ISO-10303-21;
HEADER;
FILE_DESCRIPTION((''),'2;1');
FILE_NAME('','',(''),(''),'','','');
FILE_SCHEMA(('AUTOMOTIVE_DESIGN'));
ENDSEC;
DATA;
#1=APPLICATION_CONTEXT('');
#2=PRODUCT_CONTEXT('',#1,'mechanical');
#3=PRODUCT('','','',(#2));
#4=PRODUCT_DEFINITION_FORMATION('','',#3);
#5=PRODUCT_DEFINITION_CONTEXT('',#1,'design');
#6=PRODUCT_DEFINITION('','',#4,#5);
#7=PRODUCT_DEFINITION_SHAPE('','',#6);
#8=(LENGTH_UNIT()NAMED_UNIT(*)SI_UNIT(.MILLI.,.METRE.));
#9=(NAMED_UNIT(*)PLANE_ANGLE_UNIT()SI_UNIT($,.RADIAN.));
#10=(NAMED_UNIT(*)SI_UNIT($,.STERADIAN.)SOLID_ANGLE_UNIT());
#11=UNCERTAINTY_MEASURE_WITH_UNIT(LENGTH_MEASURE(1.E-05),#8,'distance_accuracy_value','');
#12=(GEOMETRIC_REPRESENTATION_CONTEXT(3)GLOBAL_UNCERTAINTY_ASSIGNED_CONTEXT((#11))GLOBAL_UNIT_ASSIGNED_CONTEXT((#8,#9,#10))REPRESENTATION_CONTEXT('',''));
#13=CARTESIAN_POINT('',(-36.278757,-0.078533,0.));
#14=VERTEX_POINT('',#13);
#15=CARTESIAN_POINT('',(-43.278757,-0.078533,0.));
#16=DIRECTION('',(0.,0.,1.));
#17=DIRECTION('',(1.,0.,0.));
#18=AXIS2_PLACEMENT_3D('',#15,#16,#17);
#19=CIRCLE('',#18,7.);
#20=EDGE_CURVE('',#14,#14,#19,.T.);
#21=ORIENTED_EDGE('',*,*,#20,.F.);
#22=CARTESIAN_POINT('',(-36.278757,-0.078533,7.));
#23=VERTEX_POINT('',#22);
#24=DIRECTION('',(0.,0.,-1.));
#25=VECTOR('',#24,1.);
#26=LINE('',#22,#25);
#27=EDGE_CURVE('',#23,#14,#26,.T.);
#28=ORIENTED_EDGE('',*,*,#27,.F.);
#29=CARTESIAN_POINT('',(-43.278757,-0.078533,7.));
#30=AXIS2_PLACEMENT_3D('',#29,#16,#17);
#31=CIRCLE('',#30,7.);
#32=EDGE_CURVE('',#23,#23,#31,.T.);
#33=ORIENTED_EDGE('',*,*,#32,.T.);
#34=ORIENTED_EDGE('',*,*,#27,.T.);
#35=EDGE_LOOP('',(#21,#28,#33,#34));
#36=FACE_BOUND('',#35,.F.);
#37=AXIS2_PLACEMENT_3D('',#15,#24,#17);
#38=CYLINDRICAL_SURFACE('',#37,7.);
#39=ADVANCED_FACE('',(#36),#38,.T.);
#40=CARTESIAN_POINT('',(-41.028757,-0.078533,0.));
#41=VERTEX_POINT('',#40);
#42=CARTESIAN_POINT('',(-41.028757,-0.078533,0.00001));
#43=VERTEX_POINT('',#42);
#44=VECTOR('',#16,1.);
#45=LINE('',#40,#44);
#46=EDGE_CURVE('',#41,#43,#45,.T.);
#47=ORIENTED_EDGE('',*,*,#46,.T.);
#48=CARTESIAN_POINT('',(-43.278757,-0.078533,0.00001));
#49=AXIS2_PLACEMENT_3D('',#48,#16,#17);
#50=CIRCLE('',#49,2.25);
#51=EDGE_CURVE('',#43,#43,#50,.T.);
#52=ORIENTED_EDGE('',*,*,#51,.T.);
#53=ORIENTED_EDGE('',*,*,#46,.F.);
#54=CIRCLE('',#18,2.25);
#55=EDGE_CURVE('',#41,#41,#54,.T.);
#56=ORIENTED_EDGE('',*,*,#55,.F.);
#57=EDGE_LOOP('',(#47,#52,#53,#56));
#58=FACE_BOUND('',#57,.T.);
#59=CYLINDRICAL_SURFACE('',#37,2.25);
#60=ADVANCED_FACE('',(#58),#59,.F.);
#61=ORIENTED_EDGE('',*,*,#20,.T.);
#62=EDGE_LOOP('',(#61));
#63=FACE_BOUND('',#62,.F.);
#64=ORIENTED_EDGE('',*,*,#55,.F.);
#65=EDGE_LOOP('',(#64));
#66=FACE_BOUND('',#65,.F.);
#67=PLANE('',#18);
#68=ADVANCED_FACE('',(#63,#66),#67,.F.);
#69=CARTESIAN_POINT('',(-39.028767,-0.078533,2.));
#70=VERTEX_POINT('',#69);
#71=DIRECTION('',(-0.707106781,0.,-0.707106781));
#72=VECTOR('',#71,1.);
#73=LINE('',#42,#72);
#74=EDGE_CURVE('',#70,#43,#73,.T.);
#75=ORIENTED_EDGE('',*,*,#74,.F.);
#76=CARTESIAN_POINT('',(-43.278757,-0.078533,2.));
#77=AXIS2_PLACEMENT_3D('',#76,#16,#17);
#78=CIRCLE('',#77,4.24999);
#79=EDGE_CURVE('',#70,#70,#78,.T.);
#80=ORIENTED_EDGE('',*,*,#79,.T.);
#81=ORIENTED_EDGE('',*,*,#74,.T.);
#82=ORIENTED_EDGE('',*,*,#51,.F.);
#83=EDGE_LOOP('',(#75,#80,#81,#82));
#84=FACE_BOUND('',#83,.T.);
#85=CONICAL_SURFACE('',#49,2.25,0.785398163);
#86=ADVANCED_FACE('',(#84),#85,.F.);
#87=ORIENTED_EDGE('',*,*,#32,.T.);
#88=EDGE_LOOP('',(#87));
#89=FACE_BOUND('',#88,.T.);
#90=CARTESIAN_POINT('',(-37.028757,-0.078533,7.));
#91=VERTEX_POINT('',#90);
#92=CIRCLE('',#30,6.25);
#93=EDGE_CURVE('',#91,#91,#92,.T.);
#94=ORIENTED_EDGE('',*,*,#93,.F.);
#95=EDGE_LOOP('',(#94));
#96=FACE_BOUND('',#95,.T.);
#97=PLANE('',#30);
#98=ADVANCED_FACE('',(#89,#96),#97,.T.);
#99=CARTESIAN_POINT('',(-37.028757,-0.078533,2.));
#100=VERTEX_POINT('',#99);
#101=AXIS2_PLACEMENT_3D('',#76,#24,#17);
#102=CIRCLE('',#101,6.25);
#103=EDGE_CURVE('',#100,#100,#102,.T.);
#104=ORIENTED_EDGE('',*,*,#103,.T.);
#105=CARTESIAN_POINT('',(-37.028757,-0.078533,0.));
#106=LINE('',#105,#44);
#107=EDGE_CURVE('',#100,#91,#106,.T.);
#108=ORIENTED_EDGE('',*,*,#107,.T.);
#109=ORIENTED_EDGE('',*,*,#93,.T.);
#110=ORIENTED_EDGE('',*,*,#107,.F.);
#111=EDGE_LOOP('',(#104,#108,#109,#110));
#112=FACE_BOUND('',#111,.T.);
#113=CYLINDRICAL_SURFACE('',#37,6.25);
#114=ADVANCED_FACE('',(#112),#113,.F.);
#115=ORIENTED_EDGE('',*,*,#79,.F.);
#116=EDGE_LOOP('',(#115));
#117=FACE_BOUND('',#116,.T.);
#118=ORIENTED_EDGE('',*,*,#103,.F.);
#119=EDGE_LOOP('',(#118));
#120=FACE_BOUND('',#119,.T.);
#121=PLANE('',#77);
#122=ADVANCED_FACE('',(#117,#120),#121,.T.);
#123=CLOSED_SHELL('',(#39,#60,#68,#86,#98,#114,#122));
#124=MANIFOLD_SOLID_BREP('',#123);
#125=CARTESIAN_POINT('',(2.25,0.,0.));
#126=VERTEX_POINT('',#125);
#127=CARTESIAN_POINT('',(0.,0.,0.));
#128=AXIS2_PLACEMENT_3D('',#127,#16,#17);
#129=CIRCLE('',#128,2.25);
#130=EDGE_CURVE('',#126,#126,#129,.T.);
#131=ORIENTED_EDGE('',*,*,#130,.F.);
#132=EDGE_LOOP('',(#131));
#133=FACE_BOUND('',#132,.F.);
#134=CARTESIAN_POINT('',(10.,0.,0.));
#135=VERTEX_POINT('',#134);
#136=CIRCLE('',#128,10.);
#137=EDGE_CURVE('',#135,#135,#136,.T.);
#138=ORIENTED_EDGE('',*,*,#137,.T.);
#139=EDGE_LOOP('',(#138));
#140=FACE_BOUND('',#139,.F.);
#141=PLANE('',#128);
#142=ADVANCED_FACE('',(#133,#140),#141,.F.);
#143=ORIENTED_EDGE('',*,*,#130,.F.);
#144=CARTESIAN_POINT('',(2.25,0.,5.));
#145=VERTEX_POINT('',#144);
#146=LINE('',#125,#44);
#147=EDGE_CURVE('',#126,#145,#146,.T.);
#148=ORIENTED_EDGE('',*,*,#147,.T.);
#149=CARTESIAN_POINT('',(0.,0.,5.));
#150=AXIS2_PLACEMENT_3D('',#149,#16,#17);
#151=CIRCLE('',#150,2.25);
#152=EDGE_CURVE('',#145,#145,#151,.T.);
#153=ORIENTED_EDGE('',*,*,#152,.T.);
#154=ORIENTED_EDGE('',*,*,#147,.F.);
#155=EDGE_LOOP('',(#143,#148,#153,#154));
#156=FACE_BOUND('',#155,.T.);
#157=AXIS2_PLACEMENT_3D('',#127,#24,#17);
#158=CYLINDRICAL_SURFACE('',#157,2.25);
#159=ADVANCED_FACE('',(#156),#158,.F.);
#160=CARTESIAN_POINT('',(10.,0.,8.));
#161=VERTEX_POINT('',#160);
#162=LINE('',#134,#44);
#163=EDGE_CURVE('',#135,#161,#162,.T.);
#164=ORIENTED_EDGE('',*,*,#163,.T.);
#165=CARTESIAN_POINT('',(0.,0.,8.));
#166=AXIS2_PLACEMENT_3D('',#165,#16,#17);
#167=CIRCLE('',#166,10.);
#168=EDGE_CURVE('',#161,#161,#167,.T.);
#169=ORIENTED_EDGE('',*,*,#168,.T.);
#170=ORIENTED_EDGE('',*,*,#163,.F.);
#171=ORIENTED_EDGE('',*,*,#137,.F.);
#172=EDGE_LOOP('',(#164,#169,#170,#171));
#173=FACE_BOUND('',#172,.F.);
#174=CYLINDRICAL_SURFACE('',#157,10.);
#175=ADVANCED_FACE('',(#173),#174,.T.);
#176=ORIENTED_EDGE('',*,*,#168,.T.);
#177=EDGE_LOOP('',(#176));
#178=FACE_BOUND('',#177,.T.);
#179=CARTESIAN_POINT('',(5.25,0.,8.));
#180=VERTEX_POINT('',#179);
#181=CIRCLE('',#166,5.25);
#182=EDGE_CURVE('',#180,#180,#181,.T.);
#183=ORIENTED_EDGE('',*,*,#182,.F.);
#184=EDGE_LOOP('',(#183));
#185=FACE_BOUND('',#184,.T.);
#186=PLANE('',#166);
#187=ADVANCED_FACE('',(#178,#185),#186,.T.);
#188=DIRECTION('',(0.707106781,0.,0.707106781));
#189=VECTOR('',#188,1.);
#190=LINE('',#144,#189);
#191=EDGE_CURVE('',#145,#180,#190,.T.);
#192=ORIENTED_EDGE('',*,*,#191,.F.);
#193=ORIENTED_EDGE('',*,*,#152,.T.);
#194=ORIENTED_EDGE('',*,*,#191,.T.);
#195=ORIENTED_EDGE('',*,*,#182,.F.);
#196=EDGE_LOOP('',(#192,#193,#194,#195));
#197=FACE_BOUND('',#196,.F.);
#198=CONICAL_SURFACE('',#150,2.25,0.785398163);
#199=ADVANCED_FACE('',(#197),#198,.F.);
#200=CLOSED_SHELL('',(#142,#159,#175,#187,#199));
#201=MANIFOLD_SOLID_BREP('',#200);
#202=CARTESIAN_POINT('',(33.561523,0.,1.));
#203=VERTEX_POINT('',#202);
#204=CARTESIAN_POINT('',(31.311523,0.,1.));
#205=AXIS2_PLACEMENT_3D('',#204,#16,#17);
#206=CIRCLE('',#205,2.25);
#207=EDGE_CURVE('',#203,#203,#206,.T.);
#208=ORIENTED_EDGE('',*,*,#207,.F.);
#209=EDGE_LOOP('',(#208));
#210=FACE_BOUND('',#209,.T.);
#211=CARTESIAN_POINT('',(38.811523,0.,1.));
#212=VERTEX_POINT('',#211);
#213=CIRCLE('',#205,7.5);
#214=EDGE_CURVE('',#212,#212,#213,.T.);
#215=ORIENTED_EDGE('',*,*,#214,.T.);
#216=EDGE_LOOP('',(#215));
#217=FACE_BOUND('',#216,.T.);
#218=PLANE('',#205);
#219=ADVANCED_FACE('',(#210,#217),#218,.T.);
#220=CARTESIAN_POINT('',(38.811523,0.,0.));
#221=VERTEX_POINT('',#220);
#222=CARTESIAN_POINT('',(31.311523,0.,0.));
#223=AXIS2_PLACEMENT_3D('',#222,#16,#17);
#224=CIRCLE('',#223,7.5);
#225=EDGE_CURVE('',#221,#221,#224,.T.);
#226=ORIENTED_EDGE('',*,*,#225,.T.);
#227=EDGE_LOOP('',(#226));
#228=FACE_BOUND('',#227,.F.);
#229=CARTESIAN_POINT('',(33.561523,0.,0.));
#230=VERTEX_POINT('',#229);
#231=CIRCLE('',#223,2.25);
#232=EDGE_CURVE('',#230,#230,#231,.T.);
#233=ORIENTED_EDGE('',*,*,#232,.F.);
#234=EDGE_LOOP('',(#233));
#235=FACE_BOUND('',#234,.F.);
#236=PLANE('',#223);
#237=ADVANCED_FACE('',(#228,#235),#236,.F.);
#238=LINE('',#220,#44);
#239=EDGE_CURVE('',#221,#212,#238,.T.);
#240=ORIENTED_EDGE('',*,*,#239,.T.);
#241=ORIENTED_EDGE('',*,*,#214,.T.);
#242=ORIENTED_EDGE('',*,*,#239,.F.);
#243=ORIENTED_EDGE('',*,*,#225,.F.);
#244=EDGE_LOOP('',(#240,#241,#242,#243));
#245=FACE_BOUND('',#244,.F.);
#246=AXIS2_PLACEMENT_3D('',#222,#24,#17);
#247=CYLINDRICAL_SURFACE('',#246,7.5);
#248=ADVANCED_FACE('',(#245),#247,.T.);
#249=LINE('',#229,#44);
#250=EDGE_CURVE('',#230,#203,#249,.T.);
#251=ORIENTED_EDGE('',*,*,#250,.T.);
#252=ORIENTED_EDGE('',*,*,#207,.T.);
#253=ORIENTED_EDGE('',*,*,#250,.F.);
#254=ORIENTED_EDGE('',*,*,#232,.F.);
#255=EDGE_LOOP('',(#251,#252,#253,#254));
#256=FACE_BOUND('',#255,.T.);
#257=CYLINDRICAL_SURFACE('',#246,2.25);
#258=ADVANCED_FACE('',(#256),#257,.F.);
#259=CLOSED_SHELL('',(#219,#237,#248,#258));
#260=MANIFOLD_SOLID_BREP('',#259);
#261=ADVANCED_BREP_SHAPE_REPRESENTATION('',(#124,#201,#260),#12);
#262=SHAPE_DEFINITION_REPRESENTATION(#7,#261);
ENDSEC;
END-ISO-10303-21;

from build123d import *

# Parameters (mm, degrees)
F0_R     = 10
F0_R_2   = 2.25
F1_DEPTH = 8
F2_SIZE  = 3
F0_R_3   = 7.5
F3_DEPTH = 1
F0_R_4   = 7
F0_R_5   = 6.25
F4_DEPTH = 2
F5_DEPTH = 7
F6_SIZE  = 1.99999


# Not quite as in the source:
# - a fillet or chamfer is up to 0.001 mm smaller than in the source, because OpenCascade refuses the exact size


with BuildPart() as f1:
    # F0 (on Top) → F1 (new body)
    with BuildSketch(Plane.XY):
        Circle(F0_R)
        Circle(F0_R_2, mode=Mode.SUBTRACT)
    extrude(amount=F1_DEPTH)

    # F2
    f2_edges = [f1.edges().sort_by_distance(p)[0] for p in [
        (-2.25, 0, 8),
    ]]
    chamfer(f2_edges, length=F2_SIZE)


with BuildPart() as f3:
    # F0 (on Top) → F3 (new body)
    with BuildSketch(Plane.XY):
        with Locations((31.3115231693, 0)):
            Circle(F0_R_3)
        with Locations((31.3115231693, 0)):
            Circle(F0_R_2, mode=Mode.SUBTRACT)
    extrude(amount=F3_DEPTH)


with BuildPart() as f4:
    # F0 (on Top) → F4 (new body)
    with BuildSketch(Plane.XY):
        with Locations((-43.2787574828, -0.0785332668)):
            Circle(F0_R_4)
        with Locations((-43.2787574828, -0.0785332668)):
            Circle(F0_R_5, mode=Mode.SUBTRACT)
        with Locations((-43.2787574828, -0.0785332668)):
            Circle(F0_R_5)
        with Locations((-43.2787574828, -0.0785332668)):
            Circle(F0_R_2, mode=Mode.SUBTRACT)
    extrude(amount=F4_DEPTH)

    # F0 (on Top) → F5 (join)
    with BuildSketch(Plane.XY):
        with Locations((-43.2787574828, -0.0785332668)):
            Circle(F0_R_4)
        with Locations((-43.2787574828, -0.0785332668)):
            Circle(F0_R_5, mode=Mode.SUBTRACT)
    extrude(amount=F5_DEPTH)

    # F6 (size 2 in the source; OpenCascade refuses exactly that, so slightly less here)
    f6_edges = [f4.edges().sort_by_distance(p)[0] for p in [
        (-45.528757, -0.078533, 2),
    ]]
    chamfer(f6_edges, length=F6_SIZE)


solid = Compound([f1.part, f3.part, f4.part])
